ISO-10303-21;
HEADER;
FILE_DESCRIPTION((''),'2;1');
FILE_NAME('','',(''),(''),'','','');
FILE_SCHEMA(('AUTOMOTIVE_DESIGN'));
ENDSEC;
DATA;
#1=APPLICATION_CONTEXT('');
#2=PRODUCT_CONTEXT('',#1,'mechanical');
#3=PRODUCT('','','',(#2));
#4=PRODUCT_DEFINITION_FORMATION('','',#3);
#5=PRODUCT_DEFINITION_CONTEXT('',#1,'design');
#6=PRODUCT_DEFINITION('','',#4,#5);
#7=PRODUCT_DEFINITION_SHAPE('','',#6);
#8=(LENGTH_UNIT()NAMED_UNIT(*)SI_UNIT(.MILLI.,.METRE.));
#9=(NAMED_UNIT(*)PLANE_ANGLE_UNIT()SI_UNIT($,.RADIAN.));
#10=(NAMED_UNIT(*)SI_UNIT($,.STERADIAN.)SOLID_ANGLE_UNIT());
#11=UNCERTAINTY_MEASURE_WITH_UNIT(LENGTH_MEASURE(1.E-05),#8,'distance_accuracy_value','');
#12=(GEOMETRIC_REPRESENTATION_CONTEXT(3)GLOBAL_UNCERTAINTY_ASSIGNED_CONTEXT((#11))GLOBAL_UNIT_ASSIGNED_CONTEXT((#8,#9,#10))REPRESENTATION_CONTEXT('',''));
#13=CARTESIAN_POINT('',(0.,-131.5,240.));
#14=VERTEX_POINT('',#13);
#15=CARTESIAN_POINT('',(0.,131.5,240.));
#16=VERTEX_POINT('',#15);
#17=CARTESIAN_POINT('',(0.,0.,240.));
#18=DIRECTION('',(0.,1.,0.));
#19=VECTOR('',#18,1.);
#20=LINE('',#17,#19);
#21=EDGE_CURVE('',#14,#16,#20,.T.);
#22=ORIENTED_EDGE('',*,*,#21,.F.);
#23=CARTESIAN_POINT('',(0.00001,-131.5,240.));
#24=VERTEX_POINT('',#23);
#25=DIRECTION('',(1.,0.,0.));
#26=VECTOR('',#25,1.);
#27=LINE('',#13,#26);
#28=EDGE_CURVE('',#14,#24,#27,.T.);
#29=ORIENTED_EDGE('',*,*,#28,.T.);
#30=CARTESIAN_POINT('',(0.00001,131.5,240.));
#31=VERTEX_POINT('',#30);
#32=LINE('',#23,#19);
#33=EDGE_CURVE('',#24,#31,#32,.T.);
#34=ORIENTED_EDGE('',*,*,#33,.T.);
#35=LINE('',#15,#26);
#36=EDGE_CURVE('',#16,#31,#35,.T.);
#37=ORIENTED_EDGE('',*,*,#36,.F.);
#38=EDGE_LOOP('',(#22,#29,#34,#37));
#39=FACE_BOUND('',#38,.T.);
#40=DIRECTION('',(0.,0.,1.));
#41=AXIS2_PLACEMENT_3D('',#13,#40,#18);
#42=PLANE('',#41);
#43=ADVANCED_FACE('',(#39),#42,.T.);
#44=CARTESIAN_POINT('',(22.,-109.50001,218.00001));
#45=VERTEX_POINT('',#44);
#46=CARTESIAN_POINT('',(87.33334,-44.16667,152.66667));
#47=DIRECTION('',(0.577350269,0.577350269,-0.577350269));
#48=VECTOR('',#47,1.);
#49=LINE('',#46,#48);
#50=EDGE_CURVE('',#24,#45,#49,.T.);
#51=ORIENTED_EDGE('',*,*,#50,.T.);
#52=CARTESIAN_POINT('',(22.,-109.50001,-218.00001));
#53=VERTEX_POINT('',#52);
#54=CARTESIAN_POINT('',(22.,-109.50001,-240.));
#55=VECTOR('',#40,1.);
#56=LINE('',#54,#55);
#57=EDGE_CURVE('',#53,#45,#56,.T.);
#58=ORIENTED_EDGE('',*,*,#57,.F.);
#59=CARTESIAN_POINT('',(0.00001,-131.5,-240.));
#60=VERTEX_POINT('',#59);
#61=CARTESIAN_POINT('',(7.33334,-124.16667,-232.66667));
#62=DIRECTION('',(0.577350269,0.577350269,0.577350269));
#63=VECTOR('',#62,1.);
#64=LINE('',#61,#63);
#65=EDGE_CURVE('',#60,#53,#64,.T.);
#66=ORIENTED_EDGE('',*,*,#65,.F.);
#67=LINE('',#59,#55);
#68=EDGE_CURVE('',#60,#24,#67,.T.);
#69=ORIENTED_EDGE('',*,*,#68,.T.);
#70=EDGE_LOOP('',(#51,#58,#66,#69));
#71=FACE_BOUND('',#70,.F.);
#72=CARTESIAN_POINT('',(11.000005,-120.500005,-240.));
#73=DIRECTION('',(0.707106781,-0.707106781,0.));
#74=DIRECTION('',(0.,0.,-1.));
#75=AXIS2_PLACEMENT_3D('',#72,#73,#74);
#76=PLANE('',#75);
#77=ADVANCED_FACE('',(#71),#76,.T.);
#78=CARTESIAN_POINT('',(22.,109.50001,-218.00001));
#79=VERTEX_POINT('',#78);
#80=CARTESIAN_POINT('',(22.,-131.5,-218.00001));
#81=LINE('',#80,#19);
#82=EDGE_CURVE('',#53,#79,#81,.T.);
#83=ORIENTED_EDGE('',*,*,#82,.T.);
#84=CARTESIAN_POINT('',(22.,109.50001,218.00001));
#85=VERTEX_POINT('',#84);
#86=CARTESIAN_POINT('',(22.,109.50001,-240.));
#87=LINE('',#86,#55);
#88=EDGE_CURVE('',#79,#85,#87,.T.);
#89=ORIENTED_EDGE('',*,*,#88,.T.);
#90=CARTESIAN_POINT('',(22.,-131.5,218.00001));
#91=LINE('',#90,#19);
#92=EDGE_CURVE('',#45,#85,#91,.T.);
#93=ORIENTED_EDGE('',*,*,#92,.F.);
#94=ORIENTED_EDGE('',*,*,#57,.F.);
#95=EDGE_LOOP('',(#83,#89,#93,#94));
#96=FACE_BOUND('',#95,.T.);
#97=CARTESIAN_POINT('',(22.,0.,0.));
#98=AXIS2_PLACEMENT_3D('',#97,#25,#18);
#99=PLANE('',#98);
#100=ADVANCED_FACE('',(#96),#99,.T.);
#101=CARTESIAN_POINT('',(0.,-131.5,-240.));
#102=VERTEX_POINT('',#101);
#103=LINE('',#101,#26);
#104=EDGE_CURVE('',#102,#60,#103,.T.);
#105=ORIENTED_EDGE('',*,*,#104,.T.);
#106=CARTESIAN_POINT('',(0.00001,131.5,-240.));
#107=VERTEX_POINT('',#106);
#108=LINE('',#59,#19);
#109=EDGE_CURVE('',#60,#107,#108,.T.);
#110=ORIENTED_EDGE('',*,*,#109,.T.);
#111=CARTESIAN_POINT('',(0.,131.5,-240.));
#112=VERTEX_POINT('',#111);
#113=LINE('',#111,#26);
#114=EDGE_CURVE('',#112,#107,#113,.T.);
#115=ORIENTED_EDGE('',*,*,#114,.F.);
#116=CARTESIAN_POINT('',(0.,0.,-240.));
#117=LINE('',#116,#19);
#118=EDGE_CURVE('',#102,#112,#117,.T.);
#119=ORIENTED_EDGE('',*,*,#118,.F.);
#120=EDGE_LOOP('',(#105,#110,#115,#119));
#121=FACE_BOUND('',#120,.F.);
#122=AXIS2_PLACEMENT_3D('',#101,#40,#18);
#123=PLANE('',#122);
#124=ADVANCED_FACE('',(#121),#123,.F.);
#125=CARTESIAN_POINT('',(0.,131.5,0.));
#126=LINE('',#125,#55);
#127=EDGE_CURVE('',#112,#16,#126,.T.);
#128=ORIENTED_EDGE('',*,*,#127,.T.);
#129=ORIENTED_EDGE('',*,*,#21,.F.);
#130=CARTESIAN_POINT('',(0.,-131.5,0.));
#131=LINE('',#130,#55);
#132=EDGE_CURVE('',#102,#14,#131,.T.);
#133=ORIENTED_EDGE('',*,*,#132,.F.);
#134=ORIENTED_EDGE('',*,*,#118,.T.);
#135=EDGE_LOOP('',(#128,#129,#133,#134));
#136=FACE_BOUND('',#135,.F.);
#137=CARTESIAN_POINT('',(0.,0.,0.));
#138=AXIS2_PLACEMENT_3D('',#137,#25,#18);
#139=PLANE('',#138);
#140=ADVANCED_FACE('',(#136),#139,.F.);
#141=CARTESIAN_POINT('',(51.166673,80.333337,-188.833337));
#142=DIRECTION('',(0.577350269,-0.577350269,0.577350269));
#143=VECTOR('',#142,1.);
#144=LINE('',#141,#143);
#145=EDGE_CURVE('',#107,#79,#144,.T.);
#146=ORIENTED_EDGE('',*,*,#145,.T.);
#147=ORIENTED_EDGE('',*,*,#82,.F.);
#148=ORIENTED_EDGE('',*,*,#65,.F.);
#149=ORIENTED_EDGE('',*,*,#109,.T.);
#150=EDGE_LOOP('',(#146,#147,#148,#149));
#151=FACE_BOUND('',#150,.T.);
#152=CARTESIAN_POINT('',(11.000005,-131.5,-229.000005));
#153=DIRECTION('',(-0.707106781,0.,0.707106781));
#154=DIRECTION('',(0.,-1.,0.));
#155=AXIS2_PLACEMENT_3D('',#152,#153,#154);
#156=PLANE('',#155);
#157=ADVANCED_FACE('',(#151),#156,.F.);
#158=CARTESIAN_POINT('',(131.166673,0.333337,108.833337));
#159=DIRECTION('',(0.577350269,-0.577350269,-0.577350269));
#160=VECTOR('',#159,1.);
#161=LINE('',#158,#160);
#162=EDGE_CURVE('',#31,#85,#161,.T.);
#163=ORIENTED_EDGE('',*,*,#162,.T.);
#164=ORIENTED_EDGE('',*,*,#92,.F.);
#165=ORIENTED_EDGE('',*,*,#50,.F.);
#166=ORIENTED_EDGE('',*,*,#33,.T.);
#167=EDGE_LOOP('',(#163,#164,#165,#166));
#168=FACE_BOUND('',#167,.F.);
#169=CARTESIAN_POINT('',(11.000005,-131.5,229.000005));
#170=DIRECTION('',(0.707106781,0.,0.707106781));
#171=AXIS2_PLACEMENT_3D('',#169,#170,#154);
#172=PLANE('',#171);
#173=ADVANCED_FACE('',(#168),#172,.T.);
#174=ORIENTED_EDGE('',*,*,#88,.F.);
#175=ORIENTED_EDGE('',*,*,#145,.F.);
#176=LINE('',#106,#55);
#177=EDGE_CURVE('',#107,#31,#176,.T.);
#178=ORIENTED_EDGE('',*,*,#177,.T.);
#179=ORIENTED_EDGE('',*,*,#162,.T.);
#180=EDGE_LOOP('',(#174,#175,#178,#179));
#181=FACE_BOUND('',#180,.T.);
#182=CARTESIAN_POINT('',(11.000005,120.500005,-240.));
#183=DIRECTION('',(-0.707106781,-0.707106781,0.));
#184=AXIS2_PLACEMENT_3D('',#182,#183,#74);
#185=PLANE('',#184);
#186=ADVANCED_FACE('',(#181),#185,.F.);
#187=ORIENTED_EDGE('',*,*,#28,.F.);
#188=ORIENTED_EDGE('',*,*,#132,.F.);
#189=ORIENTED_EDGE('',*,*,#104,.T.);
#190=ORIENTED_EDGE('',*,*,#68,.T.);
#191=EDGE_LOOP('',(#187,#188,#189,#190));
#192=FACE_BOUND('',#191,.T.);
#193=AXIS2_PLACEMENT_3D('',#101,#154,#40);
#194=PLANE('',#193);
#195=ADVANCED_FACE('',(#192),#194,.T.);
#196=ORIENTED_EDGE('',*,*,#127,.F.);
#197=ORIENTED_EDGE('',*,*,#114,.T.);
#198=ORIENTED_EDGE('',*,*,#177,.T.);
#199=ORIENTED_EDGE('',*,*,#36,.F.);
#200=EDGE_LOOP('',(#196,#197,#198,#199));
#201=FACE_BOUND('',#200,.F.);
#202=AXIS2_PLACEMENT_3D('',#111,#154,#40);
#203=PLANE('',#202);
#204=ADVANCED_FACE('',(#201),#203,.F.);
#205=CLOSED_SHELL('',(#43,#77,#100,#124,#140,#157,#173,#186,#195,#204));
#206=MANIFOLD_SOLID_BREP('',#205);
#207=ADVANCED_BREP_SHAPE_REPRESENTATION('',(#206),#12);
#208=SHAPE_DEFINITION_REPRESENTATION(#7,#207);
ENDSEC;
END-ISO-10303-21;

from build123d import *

# Parameters (mm, degrees)
F0_W     = 263
F0_H     = 480
F1_DEPTH = 22
F2_SIZE  = 21.99999


# Not quite as in the source:
# - a fillet or chamfer is up to 0.001 mm smaller than in the source, because OpenCascade refuses the exact size


with BuildPart() as f1:
    # F0 (on Right) → F1 (new body)
    with BuildSketch(Plane.YZ):
        Rectangle(F0_W, F0_H)
    extrude(amount=F1_DEPTH)

    # F2 (size 22 in the source; OpenCascade refuses exactly that, so slightly less here)
    f2_edges = [f1.edges().sort_by_distance(p)[0] for p in [
        (22, -131.5, 0),
        (22, 0, -240),
        (22, 131.5, 0),
        (22, 0, 240),
    ]]
    chamfer(f2_edges, length=F2_SIZE)


solid = f1.part
